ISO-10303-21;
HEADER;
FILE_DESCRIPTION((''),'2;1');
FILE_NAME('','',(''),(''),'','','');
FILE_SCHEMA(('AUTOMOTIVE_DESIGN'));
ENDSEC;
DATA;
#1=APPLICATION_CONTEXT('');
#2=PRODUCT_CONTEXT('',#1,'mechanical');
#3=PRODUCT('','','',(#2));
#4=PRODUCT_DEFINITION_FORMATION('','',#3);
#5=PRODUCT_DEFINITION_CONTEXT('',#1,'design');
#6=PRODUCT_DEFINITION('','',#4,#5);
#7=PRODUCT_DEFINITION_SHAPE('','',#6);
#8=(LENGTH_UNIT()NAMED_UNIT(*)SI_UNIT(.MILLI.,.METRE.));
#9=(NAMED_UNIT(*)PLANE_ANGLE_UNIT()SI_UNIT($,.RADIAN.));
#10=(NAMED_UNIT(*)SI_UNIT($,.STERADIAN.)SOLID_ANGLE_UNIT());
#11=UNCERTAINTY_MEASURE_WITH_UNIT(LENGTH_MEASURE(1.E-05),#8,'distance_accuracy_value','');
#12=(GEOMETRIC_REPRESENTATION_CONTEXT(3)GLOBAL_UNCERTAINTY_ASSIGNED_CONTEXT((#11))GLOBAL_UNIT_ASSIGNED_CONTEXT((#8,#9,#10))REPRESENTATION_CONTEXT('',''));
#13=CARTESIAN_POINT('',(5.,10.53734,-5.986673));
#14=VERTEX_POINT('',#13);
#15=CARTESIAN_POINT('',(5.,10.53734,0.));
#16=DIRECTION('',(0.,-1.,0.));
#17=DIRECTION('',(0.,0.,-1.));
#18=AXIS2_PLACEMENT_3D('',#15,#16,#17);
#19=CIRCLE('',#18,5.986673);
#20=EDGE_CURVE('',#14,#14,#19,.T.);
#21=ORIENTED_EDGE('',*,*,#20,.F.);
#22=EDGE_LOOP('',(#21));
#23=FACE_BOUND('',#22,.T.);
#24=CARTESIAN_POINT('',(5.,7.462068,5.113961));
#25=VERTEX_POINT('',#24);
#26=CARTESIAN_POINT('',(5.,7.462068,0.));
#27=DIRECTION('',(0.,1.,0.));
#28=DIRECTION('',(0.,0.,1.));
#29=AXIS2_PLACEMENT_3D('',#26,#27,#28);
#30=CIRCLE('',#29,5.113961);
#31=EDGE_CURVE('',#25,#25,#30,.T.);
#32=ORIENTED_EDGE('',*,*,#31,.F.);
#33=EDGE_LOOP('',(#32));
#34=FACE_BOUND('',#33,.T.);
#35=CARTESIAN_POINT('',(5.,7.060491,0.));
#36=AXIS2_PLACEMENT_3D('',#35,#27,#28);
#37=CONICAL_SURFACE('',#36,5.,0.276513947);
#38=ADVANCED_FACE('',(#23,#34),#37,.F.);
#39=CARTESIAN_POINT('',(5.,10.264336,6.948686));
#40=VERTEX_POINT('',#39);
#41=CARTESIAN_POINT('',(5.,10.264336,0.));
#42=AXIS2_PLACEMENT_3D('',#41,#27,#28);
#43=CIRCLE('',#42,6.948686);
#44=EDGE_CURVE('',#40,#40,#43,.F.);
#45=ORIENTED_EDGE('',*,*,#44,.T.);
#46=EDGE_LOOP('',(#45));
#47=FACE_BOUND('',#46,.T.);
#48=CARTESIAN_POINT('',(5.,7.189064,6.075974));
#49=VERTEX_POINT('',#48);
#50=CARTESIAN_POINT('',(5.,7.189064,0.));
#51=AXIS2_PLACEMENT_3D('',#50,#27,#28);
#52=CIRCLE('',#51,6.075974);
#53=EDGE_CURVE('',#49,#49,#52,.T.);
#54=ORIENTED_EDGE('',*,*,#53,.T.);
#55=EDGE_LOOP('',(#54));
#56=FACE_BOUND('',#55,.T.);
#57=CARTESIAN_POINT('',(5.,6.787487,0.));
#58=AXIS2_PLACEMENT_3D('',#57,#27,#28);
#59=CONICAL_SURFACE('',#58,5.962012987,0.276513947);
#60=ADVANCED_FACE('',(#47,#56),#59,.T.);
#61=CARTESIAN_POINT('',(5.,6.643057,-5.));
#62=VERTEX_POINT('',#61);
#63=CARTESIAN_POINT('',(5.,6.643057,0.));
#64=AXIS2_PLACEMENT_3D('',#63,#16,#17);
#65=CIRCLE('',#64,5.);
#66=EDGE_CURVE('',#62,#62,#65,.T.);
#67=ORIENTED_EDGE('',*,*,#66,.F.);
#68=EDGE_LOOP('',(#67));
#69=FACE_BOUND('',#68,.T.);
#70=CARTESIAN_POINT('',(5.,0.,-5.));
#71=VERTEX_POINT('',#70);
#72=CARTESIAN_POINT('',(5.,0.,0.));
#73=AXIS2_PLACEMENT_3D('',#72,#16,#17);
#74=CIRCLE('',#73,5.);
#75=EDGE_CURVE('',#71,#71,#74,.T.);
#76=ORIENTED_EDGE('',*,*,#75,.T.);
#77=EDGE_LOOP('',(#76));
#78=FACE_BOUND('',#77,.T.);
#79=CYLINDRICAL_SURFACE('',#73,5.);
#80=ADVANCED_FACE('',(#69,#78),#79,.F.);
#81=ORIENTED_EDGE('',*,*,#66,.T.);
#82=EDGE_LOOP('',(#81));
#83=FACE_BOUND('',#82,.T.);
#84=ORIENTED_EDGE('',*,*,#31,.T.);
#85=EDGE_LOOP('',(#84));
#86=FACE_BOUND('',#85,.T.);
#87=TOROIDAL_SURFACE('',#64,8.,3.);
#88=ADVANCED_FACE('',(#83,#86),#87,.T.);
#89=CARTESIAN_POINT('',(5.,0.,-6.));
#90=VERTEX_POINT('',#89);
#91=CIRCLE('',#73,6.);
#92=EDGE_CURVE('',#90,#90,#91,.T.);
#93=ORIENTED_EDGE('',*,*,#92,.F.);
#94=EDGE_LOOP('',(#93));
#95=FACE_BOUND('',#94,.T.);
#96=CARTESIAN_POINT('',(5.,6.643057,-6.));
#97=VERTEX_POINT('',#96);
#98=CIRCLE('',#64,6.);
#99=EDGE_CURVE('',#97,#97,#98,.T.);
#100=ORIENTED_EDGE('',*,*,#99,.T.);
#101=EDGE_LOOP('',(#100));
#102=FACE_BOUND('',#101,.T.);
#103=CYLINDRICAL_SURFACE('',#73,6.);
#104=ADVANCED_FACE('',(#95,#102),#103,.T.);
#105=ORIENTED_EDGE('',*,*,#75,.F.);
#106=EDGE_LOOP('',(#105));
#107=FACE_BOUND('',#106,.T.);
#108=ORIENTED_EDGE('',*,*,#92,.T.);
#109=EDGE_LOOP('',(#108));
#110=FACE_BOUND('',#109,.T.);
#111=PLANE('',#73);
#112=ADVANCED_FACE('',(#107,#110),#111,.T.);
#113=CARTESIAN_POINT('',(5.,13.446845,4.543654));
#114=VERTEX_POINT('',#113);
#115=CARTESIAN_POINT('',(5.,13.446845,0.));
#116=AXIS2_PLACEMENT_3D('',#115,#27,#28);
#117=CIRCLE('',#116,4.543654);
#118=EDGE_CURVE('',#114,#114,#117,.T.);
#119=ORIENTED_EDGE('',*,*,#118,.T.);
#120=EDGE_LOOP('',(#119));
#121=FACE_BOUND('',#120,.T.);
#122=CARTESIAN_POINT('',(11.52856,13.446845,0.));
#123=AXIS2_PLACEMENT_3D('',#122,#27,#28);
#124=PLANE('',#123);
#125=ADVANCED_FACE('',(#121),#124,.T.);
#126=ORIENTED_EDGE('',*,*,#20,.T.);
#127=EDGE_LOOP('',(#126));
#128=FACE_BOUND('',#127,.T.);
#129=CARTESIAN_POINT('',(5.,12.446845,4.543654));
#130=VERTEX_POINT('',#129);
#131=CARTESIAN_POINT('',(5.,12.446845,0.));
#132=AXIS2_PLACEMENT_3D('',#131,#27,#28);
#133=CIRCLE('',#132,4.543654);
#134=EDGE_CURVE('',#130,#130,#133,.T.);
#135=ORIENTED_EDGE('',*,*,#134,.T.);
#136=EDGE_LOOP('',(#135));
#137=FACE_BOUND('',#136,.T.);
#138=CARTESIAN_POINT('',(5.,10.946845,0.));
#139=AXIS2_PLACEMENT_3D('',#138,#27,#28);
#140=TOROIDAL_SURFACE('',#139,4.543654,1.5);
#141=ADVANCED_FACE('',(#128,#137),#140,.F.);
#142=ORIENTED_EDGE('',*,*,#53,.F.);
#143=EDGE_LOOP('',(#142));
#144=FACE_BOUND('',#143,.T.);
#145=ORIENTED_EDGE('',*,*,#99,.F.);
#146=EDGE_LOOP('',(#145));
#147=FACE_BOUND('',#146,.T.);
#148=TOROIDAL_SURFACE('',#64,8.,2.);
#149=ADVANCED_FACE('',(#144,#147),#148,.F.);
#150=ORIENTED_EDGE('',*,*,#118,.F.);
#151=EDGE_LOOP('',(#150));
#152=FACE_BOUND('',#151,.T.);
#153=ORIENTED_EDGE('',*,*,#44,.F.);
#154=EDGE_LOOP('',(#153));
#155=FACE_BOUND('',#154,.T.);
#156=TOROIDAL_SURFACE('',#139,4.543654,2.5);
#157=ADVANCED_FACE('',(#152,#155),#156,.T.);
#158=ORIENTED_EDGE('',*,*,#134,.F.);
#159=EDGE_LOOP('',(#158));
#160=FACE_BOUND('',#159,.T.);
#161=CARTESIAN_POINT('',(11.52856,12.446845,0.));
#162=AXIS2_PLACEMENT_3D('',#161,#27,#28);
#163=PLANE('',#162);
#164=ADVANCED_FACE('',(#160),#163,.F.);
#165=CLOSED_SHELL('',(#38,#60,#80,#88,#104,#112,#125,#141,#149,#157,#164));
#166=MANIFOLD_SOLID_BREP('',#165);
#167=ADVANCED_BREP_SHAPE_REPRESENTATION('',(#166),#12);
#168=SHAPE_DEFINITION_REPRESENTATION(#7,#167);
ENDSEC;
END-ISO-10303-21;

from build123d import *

# Parameters (mm, degrees)
CONG_1_R = 1.5
CONG_2_R = 3
COQUE1_T = 1


with BuildPart() as part:
    # Esquisse1 → Révolution1 (revolve)
    with BuildSketch(Plane.XY):
        Polygon((10, 0), (10, 7.060491131), (11.528559936, 12.44684519), (5, 12.44684519), (5, 0), align=None)
    revolve(axis=Axis((5, 0, 0), (0, 1, 0)))

    # Congé1
    cong_1_edges = [part.edges().sort_by_distance(p)[0] for p in [
        (-1.528559936, 12.44684519, 0),
    ]]
    fillet(cong_1_edges, radius=CONG_1_R)

    # Congé2
    cong_2_edges = [part.edges().sort_by_distance(p)[0] for p in [
        (0, 7.060491131, 0),
    ]]
    fillet(cong_2_edges, radius=CONG_2_R)

    # Coque1
    coque1_openings = [part.faces().sort_by_distance(p)[0] for p in [
        (5, 0, 0),
    ]]
    offset(amount=COQUE1_T, openings=coque1_openings, kind=Kind.INTERSECTION)


solid = part.part
